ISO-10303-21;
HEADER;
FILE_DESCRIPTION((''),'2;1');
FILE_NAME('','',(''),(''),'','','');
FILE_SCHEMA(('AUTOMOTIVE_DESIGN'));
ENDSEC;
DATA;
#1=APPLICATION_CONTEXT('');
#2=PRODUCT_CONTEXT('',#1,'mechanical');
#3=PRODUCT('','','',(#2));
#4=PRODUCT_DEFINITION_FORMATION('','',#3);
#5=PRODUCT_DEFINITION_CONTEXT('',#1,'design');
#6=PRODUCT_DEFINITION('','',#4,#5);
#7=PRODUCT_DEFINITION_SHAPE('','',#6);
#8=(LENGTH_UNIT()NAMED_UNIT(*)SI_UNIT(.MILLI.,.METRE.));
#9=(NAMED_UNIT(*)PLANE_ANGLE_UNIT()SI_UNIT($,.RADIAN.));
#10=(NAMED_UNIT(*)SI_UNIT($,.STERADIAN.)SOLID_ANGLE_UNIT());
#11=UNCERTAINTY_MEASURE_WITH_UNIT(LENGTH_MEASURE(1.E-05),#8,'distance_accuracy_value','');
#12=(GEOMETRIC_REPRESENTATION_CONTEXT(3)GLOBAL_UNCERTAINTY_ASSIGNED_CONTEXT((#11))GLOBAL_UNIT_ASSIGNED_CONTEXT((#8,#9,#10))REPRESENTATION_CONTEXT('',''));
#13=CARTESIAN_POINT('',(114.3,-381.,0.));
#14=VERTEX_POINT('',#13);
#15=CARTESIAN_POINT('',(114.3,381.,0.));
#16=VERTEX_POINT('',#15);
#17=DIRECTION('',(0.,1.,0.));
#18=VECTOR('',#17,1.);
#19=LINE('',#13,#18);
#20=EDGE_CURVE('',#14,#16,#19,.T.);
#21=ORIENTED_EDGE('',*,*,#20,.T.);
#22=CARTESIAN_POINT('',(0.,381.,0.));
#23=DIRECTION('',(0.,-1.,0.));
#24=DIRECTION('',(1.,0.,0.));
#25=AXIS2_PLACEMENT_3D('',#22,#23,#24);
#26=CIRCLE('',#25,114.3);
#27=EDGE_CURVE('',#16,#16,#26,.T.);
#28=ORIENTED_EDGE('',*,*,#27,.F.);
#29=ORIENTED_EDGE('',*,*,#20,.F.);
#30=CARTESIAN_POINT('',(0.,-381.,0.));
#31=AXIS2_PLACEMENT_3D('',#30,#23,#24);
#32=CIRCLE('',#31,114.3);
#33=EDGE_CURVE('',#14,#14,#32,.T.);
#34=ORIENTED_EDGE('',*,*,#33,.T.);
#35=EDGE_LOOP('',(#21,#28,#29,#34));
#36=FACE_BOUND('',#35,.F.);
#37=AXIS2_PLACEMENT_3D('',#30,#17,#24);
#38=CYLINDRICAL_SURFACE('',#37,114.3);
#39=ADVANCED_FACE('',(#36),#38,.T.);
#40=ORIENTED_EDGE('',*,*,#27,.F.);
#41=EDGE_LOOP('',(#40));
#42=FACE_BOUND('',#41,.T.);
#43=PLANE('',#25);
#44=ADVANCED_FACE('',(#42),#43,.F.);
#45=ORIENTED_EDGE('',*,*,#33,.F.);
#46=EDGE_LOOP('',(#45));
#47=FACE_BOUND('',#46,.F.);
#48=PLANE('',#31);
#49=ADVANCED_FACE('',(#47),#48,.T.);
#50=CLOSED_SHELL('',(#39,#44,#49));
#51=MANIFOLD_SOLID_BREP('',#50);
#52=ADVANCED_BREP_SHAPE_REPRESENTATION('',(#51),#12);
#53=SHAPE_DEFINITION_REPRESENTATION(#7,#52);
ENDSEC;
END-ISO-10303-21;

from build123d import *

# Parameters (mm, degrees)
F0_W = 114.3
F0_H = 381


# Not quite as in the source:
# - the program builds the solid bodies; features that only make, move or delete a surface that nothing else refers to are left out


with BuildPart() as f1:
    # F0 (on Top) → F1 (revolve)
    with BuildSketch(Plane.XY):
        with Locations((57.15, 190.5)):
            Rectangle(F0_W, F0_H)
        with Locations((57.15, -190.5)):
            Rectangle(F0_W, F0_H)
    revolve(axis=Axis((0, 0, 0), (0, -1, 0)))


solid = f1.part
